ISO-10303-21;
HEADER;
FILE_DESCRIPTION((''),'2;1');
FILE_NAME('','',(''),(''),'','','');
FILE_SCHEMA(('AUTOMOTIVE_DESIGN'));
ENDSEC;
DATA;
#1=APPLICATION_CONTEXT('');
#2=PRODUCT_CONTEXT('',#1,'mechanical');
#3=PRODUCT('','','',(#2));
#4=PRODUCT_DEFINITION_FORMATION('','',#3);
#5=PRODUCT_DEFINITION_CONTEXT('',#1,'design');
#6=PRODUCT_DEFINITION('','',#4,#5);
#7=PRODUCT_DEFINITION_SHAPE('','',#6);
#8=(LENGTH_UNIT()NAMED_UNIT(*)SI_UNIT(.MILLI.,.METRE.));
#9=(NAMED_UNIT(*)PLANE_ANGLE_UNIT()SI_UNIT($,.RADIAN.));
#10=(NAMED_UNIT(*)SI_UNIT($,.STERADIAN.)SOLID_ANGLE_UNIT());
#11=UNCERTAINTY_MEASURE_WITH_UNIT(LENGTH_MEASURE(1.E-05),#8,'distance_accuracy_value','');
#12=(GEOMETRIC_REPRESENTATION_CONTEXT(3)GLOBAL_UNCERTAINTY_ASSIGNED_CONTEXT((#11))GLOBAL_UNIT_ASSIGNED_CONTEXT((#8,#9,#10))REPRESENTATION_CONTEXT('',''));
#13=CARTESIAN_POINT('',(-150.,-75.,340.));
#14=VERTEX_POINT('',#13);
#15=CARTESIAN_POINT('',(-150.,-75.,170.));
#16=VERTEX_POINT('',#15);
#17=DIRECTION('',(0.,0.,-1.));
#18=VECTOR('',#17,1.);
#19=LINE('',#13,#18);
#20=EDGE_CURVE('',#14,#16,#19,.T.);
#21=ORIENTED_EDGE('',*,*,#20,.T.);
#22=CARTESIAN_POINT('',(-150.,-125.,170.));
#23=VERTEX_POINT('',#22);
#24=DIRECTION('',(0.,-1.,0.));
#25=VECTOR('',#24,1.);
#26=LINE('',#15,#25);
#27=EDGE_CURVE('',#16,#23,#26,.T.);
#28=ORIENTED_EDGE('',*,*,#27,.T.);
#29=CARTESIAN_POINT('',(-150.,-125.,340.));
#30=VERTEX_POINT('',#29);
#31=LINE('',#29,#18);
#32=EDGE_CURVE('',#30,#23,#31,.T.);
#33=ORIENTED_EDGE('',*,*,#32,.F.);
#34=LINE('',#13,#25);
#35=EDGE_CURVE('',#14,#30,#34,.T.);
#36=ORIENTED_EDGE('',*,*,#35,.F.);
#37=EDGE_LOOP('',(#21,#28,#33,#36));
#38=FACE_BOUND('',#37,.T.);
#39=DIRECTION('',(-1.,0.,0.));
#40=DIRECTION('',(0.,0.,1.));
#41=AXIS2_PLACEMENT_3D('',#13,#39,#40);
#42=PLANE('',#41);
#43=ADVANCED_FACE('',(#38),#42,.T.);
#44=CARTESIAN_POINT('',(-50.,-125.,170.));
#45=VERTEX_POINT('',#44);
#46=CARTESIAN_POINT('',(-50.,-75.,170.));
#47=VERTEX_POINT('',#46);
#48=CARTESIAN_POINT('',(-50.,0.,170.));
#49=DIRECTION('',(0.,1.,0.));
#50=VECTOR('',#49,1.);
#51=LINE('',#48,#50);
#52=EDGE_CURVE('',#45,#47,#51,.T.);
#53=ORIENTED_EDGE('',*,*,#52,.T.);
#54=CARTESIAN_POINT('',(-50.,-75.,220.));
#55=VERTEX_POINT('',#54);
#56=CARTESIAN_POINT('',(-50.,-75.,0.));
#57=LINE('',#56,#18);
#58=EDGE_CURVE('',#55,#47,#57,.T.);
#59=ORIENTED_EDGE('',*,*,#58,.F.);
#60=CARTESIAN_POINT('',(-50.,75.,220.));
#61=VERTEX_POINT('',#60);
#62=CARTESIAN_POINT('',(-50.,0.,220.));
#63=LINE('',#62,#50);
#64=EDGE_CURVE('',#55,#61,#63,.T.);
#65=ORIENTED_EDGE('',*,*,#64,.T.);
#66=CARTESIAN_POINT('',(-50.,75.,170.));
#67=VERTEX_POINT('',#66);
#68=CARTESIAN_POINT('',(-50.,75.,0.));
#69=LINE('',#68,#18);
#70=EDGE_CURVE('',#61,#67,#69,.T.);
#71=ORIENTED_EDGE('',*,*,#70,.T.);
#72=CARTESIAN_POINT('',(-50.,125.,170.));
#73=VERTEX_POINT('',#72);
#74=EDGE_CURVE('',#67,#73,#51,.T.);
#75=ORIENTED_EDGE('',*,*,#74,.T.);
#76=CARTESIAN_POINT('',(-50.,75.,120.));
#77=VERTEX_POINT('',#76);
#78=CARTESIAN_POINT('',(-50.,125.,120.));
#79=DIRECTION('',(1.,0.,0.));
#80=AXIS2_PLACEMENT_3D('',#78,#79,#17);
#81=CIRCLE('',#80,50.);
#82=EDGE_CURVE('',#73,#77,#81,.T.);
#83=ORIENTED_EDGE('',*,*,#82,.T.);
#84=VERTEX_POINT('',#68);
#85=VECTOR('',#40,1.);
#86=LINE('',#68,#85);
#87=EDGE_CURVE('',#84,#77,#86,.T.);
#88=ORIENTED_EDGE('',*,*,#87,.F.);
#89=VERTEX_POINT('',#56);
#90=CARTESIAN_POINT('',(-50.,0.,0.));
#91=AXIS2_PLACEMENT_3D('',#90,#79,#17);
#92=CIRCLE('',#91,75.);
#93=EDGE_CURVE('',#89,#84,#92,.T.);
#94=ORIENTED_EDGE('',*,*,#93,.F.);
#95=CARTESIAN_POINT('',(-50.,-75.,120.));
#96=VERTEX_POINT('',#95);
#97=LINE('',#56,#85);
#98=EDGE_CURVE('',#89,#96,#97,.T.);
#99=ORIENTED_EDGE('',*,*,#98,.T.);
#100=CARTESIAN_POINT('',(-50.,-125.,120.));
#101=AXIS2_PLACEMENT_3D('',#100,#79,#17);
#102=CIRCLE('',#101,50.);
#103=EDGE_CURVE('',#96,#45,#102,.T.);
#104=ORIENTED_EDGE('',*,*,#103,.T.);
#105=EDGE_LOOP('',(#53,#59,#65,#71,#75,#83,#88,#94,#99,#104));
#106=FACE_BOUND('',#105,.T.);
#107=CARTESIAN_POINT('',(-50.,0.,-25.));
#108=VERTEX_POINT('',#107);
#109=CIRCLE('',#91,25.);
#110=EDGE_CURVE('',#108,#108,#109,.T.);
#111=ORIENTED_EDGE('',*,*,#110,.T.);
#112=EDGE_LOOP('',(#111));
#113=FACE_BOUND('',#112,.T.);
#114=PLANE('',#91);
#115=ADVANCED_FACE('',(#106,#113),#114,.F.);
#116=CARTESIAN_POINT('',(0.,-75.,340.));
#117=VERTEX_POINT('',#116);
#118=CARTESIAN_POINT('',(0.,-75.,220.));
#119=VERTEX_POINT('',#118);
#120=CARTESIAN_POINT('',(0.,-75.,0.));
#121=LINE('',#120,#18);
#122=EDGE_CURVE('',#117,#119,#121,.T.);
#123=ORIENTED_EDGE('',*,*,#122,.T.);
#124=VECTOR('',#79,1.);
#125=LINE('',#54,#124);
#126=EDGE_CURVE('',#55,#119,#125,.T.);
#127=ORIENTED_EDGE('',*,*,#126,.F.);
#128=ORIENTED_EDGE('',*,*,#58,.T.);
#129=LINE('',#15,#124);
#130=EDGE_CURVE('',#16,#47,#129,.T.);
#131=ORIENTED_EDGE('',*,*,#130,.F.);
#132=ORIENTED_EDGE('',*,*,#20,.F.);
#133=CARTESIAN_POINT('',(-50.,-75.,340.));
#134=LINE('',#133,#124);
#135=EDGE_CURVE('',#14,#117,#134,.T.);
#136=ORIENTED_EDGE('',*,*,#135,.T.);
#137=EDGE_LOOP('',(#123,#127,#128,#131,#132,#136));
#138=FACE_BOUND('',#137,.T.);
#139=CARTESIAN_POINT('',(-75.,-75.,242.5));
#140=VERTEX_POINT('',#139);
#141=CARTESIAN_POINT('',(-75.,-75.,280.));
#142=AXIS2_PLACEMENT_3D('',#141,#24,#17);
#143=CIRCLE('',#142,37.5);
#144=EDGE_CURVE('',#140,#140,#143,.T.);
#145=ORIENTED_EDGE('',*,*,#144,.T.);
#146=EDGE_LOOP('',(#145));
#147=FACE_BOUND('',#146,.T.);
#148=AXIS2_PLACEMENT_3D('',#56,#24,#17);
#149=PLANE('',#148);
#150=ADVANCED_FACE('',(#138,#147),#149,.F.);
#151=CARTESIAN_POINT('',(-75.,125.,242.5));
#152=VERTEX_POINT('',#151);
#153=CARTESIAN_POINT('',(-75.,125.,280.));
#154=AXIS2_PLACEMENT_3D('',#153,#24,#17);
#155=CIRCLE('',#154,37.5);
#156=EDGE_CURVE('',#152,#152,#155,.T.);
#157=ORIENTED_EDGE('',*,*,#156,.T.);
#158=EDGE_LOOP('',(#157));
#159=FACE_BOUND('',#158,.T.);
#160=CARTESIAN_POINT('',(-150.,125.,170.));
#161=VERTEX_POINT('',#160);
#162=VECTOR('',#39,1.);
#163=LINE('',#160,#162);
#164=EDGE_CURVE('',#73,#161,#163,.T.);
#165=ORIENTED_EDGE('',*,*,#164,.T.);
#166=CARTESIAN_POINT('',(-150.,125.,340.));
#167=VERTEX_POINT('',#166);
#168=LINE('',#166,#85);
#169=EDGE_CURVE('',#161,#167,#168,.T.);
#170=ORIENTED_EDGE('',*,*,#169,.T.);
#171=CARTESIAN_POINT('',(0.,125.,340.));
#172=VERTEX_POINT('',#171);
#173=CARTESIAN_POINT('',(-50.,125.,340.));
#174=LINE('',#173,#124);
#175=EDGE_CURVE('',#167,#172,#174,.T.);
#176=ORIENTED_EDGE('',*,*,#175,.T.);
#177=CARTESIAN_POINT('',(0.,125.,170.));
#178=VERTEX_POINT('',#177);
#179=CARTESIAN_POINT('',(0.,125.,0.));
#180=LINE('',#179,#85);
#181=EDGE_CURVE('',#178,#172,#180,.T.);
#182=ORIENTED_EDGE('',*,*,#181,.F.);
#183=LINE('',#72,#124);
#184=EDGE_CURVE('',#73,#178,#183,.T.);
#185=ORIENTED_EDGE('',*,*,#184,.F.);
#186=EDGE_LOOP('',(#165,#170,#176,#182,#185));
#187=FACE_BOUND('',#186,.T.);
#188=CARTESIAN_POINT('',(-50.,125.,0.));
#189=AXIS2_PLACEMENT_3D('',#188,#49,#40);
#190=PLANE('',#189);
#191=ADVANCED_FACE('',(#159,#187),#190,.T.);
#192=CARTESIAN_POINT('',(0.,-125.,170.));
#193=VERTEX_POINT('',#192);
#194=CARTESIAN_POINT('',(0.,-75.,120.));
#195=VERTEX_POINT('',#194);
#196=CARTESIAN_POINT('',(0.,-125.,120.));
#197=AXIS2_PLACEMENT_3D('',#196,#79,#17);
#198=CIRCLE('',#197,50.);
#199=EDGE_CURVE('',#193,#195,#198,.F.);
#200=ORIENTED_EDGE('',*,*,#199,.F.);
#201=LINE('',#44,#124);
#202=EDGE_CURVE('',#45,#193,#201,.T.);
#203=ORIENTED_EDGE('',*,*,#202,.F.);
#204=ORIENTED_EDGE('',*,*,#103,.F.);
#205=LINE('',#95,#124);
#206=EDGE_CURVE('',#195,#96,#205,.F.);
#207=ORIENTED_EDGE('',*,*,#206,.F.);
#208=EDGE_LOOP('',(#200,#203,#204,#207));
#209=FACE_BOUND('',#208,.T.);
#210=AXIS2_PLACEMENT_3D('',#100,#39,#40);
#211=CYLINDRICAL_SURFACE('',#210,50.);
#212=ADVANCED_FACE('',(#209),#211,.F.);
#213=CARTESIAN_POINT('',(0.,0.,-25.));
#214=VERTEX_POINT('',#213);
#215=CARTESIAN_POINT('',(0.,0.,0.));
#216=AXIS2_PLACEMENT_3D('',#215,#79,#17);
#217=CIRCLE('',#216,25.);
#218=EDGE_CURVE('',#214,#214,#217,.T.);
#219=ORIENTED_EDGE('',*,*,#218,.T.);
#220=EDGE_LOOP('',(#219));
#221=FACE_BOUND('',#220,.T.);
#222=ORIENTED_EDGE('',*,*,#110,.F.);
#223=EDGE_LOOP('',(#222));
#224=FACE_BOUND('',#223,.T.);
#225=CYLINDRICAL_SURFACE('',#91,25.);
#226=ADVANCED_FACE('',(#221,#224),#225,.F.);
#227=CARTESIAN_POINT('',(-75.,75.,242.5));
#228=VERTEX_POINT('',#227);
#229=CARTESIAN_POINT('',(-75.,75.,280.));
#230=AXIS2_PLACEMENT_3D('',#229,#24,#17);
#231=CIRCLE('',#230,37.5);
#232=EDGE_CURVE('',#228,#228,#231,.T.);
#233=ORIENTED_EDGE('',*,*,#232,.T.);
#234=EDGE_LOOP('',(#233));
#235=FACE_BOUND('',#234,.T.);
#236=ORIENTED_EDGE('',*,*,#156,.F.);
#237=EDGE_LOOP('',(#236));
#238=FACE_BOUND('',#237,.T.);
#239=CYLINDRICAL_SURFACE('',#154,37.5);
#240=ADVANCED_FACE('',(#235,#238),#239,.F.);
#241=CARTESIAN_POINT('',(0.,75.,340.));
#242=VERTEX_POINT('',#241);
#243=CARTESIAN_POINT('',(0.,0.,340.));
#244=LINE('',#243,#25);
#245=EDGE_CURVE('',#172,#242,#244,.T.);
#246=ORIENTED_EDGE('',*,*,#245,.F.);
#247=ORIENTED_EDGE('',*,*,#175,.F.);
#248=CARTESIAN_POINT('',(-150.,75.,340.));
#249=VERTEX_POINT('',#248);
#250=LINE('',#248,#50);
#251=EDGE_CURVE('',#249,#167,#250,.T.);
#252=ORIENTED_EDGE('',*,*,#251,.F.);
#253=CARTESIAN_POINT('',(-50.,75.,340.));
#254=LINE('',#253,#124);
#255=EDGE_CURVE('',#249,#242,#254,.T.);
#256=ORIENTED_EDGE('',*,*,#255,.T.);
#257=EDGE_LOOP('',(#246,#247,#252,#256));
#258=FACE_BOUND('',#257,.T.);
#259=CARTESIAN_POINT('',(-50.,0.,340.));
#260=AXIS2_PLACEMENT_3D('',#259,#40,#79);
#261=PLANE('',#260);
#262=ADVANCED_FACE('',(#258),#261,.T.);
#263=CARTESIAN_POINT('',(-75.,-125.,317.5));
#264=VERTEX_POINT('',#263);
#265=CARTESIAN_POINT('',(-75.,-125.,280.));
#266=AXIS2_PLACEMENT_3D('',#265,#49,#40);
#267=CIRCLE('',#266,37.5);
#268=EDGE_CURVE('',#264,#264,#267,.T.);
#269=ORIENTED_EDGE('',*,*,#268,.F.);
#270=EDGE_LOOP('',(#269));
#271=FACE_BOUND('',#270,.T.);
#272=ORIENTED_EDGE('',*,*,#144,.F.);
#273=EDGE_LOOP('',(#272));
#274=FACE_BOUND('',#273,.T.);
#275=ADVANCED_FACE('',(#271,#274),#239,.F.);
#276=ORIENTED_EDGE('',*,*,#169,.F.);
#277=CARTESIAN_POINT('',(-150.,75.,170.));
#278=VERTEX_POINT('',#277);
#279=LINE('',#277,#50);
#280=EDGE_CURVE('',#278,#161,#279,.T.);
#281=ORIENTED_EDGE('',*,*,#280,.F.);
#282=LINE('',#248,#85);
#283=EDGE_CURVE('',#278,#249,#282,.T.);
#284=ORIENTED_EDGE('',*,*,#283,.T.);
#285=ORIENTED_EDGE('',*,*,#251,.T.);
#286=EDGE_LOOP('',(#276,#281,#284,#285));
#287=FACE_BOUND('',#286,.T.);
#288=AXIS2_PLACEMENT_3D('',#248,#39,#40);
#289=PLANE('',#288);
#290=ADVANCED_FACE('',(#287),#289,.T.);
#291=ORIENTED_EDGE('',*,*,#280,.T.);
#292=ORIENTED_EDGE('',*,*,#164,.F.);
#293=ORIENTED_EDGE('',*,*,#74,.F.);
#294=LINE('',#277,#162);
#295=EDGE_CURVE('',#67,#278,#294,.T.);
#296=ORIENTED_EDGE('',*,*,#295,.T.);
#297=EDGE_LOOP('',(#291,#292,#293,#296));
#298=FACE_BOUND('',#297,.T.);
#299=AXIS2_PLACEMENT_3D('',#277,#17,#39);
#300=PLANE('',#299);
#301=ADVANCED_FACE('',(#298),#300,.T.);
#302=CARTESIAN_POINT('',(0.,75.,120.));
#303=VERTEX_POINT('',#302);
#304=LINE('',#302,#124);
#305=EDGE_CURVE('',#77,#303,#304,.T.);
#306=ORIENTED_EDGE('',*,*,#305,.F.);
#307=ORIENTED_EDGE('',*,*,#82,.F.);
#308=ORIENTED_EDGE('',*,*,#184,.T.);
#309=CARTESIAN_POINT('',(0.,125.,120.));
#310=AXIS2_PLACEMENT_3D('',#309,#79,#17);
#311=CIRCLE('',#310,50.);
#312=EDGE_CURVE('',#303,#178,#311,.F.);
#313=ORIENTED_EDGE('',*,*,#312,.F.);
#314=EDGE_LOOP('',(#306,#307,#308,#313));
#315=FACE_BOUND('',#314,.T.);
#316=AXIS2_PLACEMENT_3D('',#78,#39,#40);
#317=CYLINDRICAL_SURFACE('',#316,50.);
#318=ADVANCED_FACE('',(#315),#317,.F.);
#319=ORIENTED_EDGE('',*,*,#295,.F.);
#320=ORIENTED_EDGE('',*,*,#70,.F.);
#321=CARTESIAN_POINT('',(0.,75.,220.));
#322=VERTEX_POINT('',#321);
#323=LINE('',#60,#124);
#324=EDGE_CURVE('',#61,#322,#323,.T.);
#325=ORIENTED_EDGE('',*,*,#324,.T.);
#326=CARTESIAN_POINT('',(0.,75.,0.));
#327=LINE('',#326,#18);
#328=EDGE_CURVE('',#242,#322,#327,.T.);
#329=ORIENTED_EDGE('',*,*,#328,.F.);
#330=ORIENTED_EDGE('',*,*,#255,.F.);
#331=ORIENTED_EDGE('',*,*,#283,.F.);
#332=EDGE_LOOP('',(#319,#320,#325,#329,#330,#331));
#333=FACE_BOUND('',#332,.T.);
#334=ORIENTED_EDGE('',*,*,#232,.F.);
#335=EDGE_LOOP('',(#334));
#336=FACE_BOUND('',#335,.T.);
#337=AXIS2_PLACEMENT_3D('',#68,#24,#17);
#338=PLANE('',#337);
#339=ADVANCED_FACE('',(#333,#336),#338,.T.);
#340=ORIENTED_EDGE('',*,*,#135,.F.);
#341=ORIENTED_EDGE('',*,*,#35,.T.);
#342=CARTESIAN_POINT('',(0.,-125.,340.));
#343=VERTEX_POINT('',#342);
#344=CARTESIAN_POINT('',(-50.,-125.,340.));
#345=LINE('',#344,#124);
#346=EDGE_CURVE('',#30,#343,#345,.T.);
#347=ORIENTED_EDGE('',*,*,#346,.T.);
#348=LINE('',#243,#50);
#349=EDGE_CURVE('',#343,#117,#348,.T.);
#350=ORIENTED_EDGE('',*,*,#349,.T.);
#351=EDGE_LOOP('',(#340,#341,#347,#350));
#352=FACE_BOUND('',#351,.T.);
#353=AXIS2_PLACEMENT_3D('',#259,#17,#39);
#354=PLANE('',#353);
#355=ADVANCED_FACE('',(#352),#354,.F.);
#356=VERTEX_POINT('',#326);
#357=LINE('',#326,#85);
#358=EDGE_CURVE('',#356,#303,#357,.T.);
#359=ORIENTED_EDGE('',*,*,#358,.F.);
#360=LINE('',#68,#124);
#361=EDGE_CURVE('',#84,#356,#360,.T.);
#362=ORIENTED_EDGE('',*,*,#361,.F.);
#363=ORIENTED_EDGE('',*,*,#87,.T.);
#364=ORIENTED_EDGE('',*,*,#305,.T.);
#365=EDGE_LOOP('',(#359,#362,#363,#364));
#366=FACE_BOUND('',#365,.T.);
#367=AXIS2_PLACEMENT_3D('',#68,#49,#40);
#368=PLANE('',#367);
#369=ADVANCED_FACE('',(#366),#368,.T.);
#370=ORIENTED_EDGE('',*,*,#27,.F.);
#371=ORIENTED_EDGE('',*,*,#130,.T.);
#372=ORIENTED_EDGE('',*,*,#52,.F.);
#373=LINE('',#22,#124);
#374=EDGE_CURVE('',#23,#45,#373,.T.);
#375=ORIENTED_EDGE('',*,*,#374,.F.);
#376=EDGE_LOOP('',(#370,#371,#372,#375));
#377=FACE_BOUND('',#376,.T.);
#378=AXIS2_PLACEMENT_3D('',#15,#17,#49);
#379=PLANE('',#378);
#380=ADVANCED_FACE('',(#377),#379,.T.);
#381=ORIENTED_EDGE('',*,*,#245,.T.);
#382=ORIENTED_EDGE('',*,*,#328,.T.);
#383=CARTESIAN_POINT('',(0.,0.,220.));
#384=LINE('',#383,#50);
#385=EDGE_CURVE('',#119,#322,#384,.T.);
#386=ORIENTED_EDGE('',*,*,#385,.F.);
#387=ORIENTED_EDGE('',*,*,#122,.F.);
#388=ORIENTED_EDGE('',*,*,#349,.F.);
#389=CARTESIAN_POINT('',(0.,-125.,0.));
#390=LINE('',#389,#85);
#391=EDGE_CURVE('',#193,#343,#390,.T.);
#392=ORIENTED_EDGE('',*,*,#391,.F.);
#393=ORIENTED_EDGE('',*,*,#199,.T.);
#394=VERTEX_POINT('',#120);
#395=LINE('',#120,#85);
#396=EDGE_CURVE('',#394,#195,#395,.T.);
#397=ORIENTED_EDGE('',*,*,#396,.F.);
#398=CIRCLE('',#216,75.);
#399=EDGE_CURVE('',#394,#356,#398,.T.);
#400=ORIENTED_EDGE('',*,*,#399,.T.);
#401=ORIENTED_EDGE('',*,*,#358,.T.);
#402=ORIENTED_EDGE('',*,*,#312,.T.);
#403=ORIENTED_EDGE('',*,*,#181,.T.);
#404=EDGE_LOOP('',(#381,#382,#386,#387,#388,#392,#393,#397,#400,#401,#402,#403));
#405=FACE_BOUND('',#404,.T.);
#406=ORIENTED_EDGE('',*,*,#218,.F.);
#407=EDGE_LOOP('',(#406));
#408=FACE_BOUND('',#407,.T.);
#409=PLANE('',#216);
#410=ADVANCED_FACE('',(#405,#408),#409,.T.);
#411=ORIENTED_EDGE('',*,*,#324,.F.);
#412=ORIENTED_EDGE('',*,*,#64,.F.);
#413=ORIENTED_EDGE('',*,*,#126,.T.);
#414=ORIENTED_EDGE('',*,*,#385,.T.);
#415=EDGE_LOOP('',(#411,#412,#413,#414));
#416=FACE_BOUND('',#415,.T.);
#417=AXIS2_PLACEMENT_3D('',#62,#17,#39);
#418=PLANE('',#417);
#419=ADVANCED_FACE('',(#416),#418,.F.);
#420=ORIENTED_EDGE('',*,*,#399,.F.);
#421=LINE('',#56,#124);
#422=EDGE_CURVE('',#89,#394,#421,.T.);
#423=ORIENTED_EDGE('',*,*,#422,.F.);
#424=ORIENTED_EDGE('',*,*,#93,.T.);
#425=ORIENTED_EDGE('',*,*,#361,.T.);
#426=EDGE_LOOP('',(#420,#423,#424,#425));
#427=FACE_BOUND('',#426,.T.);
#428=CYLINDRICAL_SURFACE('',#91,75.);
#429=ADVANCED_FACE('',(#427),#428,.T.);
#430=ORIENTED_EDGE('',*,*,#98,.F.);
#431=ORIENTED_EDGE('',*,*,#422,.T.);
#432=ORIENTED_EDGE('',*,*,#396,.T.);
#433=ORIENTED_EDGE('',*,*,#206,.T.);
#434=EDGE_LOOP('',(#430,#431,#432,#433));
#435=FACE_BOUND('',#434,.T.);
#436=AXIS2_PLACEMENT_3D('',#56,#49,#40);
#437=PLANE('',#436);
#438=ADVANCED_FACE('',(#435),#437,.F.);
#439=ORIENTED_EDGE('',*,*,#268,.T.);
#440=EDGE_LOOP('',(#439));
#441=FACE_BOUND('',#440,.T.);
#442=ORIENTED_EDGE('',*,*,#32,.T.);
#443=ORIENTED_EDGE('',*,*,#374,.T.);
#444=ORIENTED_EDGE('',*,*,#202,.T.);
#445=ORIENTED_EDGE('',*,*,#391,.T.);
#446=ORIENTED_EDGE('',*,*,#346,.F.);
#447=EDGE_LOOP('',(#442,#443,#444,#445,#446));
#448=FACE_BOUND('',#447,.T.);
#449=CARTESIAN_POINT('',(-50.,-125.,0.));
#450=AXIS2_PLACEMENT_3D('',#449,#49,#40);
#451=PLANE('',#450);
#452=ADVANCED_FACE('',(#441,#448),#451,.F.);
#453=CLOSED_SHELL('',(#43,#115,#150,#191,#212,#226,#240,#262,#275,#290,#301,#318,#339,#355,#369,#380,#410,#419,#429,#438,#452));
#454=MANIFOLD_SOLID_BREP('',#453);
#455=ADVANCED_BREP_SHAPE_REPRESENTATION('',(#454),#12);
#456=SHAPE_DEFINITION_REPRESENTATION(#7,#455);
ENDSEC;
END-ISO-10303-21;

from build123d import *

# Parameters (mm, degrees)
BOSS_EXTRUDE1_DEPTH     = 50
FILLET1_R               = 50
SKETCH2_W               = 150
SKETCH2_H               = 170
BOSS_EXTRUDE2_DEPTH     = 50
SKETCH3_W               = 150
SKETCH3_H               = 170
BOSS_EXTRUDE3_DEPTH     = 50
CUT_EXTRUDE1_DEPTH      = 448.883913531
CUT_EXTRUDE1_DEPTH_BACK = 448.883913531
SKETCH4_R               = 37.5


with BuildPart() as part:
    # Sketch1 → Boss-Extrude1 (new body)
    # profile 1 of 4: a face of its own
    with BuildSketch(Plane.YZ):
        with BuildLine():
            Line((-75, 170), (-75, 0))
            ThreePointArc((-75, 0), (-53.033008589, 53.033008589), (0, 75))
            Line((0, 75), (0, 220))
            Line((0, 220), (-75, 220))
            Line((-75, 220), (-75, 340))
            Line((-75, 340), (-125, 340))
            Line((-125, 340), (-125, 170))
            Line((-125, 170), (-75, 170))
        make_face()
    # profile 2 of 4: a face of its own
    with BuildSketch(Plane.YZ):
        with BuildLine():
            ThreePointArc((0, 75), (53.033008589, 53.033008589), (75, 0))
            Line((75, 0), (75, 170))
            Line((75, 170), (125, 170))
            Line((125, 170), (125, 340))
            Line((125, 340), (75, 340))
            Line((75, 340), (75, 220))
            Line((75, 220), (0, 220))
            Line((0, 220), (0, 75))
        make_face()
    # profile 3 of 4: a face of its own
    with BuildSketch(Plane.YZ):
        with BuildLine():
            ThreePointArc((0, 75), (-53.033008589, 53.033008589), (-75, 0))
            ThreePointArc((-75, 0), (0, -75), (75, 0))
            ThreePointArc((75, 0), (53.033008589, 53.033008589), (0, 75))
        make_face()
        with BuildLine():
            ThreePointArc((25, 0), (-17.67766953, -17.67766953), (0, 25))
            ThreePointArc((0, 25), (17.67766953, 17.67766953), (25, 0))
        make_face(mode=Mode.SUBTRACT)
    # profile 4 of 4: a face of its own
    with BuildSketch(Plane.YZ):
        with BuildLine():
            ThreePointArc((0, 75), (-53.033008589, 53.033008589), (-75, 0))
            ThreePointArc((-75, 0), (0, -75), (75, 0))
            ThreePointArc((75, 0), (53.033008589, 53.033008589), (0, 75))
        make_face()
        with BuildLine():
            ThreePointArc((25, 0), (-17.67766953, -17.67766953), (0, 25))
            ThreePointArc((0, 25), (17.67766953, 17.67766953), (25, 0))
        make_face(mode=Mode.SUBTRACT)
    extrude(amount=-BOSS_EXTRUDE1_DEPTH)

    # Fillet1
    fillet1_edges = [part.edges().sort_by_distance(p)[0] for p in [
        (-25, 75, 170),
        (-25, -75, 170),
    ]]
    fillet(fillet1_edges, radius=FILLET1_R - 0.0001)  # a hair under: the kernel refuses the full size

    # Sketch2 → Boss-Extrude2 (add)
    with BuildSketch(Plane(origin=(0, 125, 0), x_dir=(-1, 0, 0), z_dir=(0, 1, 0))):
        with Locations((75, 255)):
            Rectangle(SKETCH2_W, SKETCH2_H)
    extrude(amount=-BOSS_EXTRUDE2_DEPTH)

    # Sketch3 → Boss-Extrude3 (add)
    with BuildSketch(Plane.XZ.offset(125)):
        with Locations((-75, 255)):
            Rectangle(SKETCH3_W, SKETCH3_H)
    extrude(amount=-BOSS_EXTRUDE3_DEPTH)

    # Sketch4 → Cut-Extrude1 (cut, two sides: drawn at the far end of the back side and taken through both)
    with BuildSketch(Plane.XZ.offset(125).offset(-CUT_EXTRUDE1_DEPTH_BACK)):
        with Locations(Location((-75, 280, 0), (0, 0, 270))):
            Circle(SKETCH4_R)
    extrude(amount=CUT_EXTRUDE1_DEPTH + CUT_EXTRUDE1_DEPTH_BACK, mode=Mode.SUBTRACT)


solid = part.part
